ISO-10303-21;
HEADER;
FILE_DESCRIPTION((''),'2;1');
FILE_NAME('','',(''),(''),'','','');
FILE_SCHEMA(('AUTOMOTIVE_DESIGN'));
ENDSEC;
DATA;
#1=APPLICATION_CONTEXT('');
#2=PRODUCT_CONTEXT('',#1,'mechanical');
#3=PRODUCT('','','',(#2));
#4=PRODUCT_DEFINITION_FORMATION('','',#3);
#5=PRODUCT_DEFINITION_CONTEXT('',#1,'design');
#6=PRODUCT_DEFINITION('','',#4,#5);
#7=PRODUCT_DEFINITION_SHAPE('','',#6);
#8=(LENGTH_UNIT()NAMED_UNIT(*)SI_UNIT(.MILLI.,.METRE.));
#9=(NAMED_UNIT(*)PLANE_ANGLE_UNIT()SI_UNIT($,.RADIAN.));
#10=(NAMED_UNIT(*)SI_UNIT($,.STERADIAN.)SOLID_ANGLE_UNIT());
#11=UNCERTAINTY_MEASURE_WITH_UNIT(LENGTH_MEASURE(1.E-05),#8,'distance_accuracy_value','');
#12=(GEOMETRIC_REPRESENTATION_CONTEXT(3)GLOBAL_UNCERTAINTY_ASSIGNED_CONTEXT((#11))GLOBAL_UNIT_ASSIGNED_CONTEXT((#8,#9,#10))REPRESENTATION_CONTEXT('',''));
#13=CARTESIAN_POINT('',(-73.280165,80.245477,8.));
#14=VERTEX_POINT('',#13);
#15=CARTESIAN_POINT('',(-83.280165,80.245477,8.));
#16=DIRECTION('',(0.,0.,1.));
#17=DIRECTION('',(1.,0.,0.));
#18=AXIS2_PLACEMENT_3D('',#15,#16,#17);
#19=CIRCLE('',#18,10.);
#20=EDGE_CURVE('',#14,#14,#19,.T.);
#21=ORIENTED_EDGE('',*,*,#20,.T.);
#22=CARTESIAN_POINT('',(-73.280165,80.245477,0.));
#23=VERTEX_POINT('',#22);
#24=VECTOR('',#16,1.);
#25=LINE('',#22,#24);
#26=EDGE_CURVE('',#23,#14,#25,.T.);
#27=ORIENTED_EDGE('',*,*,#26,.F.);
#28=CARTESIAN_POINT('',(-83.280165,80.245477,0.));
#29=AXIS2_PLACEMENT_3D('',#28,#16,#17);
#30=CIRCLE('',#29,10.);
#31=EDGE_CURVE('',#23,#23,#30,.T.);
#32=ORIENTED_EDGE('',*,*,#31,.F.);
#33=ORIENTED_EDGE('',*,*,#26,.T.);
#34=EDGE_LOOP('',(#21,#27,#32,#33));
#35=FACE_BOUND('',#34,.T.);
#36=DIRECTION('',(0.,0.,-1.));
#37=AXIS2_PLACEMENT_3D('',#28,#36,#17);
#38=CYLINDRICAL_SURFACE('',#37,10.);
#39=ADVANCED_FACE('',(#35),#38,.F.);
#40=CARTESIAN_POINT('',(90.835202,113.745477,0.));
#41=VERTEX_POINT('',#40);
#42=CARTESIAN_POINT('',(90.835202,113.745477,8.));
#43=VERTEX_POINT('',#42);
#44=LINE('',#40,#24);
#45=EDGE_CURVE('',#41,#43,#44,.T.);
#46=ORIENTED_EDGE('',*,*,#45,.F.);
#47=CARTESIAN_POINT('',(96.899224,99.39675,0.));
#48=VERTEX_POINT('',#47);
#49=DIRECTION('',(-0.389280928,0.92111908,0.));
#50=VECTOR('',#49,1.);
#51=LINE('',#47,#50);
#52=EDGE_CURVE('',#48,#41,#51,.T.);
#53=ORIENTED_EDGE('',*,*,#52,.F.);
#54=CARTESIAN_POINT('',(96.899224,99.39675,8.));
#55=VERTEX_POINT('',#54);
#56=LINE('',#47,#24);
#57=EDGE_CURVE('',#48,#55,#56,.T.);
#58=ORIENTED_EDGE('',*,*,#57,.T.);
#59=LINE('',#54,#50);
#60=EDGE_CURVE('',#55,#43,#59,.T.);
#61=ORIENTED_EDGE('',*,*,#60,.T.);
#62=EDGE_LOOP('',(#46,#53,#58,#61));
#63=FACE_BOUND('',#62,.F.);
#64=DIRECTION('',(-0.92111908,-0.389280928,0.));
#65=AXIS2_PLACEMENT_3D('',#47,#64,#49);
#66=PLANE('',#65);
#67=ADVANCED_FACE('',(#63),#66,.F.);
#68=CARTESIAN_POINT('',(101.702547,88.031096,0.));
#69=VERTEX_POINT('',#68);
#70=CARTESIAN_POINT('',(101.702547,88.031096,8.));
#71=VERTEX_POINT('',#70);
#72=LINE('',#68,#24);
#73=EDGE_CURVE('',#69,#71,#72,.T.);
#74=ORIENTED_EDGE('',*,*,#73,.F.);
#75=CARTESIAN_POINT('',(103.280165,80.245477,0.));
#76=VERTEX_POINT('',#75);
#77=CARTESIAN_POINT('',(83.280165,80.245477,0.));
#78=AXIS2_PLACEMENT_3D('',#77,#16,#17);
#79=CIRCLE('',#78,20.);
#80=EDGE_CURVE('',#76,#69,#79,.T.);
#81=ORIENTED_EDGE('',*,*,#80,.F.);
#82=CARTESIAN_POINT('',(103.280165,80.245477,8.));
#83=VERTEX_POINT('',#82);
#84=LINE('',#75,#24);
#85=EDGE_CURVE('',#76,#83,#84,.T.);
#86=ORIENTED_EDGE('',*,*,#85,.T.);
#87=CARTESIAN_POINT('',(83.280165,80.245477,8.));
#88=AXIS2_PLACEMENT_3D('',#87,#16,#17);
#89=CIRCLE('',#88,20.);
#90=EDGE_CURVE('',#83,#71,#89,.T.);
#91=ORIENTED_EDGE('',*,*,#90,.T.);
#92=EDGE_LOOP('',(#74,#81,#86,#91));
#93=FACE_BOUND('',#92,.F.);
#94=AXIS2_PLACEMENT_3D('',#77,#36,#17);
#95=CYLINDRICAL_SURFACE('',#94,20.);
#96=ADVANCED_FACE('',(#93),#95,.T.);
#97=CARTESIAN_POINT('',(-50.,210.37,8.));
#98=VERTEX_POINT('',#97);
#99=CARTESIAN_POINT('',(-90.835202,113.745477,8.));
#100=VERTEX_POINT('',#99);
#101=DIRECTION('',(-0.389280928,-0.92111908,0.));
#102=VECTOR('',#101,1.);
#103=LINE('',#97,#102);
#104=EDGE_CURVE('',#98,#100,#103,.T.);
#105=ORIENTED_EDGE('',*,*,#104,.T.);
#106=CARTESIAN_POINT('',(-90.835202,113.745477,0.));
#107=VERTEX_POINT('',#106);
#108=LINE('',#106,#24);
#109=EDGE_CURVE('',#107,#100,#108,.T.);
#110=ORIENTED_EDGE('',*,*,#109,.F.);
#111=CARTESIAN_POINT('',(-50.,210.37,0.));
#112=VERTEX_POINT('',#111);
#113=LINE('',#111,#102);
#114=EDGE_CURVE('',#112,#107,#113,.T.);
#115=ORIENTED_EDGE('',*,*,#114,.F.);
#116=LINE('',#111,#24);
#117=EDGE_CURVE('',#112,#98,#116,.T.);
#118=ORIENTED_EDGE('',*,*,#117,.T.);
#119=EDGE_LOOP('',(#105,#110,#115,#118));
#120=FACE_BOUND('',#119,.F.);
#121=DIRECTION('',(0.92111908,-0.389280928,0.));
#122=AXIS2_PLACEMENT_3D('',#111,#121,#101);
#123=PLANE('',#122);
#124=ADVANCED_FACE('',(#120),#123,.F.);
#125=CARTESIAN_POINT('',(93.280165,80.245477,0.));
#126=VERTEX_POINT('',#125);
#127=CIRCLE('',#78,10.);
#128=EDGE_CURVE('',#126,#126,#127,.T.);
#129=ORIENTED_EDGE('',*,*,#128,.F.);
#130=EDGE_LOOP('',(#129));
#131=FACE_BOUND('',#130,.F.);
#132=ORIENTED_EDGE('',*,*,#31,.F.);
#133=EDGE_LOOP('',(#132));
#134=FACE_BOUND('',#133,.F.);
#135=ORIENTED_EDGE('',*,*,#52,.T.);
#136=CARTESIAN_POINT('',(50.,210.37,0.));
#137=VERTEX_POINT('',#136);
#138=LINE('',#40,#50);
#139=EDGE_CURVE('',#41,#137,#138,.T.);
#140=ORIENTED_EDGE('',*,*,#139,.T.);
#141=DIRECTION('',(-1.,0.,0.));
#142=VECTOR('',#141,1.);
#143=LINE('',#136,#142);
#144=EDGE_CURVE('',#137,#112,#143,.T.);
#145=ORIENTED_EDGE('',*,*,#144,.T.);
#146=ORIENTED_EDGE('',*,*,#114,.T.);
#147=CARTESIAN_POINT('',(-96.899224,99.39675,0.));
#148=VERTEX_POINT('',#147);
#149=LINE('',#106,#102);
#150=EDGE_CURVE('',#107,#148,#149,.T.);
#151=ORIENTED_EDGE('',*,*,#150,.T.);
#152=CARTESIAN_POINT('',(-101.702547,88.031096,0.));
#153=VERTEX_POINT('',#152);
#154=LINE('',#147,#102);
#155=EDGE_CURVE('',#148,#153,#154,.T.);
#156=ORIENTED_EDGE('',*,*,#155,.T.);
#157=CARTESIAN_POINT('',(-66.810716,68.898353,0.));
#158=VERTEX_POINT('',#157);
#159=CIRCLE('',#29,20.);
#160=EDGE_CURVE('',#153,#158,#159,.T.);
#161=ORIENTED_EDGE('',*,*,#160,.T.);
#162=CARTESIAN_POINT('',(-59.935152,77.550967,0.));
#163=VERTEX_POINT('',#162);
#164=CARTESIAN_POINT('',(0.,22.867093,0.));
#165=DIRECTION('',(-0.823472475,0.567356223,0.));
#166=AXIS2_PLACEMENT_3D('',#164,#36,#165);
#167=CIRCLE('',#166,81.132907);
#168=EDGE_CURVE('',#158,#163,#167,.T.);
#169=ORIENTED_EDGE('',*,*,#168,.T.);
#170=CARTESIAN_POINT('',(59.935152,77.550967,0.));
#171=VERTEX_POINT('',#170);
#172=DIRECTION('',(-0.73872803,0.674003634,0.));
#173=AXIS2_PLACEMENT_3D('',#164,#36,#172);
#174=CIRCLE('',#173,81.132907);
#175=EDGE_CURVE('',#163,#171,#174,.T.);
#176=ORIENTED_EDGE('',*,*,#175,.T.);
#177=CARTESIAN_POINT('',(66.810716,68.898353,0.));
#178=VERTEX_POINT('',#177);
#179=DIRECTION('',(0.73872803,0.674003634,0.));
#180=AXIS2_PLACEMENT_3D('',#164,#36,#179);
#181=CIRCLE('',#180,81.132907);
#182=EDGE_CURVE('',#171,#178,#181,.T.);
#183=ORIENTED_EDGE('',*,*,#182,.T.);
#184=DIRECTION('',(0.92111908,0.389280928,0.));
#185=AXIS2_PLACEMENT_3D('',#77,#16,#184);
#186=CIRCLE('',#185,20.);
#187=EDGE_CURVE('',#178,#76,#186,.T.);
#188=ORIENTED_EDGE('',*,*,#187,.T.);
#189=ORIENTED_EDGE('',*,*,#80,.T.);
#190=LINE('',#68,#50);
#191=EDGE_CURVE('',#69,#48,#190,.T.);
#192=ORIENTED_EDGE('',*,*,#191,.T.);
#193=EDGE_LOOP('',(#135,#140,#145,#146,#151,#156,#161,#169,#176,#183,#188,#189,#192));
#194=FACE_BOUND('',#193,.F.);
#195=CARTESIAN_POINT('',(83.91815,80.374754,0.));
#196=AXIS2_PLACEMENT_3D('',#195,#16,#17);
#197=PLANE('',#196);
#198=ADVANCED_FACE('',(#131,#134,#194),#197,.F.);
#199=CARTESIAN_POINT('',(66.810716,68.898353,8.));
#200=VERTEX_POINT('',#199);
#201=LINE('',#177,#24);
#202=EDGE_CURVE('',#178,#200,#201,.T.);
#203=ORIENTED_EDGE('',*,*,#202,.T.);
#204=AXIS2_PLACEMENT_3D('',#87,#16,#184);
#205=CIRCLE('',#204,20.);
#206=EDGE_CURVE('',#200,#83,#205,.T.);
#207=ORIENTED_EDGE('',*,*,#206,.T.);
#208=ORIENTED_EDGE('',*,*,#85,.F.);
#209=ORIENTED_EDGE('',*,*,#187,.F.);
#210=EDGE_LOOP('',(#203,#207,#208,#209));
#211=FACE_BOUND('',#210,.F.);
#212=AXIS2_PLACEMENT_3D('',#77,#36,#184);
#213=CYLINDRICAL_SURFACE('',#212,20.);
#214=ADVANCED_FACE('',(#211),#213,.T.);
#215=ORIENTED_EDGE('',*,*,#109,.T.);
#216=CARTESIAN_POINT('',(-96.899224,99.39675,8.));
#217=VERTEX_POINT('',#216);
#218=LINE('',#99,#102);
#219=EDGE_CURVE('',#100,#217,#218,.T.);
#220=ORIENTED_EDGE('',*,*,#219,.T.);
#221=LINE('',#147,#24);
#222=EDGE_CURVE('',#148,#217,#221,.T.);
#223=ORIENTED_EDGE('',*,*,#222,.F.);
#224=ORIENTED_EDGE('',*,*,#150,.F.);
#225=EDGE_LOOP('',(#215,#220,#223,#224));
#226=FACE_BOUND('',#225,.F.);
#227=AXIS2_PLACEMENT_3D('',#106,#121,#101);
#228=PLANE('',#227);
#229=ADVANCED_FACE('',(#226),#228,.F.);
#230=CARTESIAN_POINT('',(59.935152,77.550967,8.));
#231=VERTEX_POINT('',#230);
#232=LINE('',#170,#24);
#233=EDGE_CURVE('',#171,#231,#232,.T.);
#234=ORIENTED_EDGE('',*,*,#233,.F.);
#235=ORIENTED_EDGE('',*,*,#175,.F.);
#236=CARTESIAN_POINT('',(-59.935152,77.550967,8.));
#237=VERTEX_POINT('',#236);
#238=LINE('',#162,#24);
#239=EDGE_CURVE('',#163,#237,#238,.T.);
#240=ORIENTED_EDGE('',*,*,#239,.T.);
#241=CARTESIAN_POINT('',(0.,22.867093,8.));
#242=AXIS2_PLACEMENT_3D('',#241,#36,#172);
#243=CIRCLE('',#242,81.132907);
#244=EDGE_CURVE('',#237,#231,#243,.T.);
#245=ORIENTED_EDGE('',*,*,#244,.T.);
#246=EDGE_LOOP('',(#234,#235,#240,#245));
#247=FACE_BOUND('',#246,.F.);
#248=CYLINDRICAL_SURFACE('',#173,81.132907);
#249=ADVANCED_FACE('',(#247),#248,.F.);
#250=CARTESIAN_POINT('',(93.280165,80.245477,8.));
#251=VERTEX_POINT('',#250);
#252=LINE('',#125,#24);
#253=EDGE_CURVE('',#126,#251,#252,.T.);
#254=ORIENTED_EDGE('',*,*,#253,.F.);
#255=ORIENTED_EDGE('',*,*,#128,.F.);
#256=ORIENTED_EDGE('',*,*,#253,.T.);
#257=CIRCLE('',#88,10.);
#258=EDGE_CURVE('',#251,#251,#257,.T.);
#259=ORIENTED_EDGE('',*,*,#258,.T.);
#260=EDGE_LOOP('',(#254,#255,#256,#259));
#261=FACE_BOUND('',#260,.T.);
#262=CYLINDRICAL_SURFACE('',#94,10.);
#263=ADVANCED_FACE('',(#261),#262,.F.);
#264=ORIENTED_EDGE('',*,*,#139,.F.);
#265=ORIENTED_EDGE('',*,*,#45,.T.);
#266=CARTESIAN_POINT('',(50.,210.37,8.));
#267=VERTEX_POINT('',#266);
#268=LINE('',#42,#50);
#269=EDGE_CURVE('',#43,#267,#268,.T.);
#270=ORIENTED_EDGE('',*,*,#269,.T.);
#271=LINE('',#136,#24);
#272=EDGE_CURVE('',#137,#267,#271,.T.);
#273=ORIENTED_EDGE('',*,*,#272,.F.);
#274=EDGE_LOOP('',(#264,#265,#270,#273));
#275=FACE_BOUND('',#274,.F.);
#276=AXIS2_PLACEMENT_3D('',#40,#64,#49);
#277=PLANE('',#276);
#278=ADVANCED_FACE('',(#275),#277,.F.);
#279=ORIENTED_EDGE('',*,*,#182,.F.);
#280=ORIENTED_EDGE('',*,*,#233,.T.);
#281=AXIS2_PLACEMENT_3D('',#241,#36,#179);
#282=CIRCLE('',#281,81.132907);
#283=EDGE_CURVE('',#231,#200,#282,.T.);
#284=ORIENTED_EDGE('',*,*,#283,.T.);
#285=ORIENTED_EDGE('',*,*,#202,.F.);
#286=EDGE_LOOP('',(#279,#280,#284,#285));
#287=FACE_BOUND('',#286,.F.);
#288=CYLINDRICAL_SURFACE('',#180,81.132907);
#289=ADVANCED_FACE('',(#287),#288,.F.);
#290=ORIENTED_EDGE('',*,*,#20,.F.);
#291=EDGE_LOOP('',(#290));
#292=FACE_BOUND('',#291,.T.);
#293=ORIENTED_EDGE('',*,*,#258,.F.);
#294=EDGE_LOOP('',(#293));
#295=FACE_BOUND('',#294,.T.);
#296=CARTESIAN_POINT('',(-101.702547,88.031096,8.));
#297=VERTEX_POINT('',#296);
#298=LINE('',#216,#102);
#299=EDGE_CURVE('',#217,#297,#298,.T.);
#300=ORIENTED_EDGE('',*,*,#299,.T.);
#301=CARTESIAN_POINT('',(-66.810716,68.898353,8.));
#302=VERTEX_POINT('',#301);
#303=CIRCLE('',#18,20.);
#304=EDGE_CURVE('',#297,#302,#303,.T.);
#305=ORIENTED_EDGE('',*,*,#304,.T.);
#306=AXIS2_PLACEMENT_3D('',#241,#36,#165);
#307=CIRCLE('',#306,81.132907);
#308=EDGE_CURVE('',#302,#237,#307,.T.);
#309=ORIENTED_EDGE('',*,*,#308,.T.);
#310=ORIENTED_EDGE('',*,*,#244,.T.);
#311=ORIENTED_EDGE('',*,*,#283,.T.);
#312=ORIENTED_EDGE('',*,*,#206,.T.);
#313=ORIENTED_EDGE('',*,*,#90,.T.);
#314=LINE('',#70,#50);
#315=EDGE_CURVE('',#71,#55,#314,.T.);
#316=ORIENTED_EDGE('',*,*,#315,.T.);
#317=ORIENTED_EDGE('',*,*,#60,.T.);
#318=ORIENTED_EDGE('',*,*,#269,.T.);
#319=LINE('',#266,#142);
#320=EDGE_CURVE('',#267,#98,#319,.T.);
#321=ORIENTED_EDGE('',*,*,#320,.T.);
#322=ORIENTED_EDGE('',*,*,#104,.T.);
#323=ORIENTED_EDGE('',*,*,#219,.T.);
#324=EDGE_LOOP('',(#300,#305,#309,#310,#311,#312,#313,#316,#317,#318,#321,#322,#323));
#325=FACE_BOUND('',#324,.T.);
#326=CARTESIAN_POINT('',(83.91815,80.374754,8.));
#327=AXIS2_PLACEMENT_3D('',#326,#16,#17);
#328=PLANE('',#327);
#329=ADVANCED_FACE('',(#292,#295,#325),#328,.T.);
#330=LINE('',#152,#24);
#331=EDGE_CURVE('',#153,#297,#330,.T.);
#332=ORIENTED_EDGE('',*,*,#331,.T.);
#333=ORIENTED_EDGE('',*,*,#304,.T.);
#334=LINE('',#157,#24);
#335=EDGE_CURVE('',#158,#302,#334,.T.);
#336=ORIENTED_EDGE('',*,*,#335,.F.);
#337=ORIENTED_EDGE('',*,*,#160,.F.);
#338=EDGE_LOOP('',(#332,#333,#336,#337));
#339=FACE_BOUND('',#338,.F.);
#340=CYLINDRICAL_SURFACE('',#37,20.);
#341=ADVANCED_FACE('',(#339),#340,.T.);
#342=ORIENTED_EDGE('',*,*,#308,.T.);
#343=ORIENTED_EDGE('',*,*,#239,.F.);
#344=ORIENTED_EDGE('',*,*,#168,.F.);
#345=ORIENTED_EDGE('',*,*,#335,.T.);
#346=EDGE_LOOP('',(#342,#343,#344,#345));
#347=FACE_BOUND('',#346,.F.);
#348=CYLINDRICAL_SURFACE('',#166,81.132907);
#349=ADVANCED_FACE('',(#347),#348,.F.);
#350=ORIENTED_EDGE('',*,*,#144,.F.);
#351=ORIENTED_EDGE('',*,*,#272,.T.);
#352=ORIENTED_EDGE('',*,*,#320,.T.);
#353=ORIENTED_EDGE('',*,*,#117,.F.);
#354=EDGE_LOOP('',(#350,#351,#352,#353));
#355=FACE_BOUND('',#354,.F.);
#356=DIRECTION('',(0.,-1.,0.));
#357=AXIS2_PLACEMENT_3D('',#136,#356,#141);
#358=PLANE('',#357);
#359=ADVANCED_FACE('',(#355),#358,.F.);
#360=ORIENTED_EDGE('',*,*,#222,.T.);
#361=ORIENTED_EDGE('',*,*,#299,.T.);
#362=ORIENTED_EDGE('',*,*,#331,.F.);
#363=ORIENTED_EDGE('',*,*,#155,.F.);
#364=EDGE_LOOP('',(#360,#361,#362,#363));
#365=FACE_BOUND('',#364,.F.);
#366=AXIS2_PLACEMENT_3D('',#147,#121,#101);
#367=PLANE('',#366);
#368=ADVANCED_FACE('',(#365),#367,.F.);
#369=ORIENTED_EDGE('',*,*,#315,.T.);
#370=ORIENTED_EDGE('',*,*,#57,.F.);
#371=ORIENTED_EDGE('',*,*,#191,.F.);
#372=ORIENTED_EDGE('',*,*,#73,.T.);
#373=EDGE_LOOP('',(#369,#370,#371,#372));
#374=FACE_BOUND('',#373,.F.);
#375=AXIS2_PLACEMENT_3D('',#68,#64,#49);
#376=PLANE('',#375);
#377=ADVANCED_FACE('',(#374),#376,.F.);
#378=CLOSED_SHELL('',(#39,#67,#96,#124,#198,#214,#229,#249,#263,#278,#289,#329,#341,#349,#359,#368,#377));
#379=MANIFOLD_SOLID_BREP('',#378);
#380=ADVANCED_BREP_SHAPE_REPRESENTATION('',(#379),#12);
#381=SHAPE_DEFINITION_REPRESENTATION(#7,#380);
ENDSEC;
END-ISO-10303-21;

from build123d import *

# Parameters (mm, degrees)
F0_R     = 10
F1_DEPTH = 8


with BuildPart() as f1:
    # F0 (on Top) → F1 (new body)
    with BuildSketch(Plane.XY):
        with BuildLine():
            ThreePointArc((66.8107155763, 68.8983527146), (89.2220086446, 61.1485010982), (103.2801650714, 80.2454771665))
            ThreePointArc((103.2801650714, 80.2454771665), (102.8817929615, 84.2174016446), (101.7025466654, 88.0310957293))
            ThreePointArc((101.7025466654, 88.0310957293), (73.6640874011, 97.7820404055), (66.8107155763, 68.8983527146))
        make_face()
        with Locations((83.2801650714, 80.2454771665)):
            Circle(F0_R, mode=Mode.SUBTRACT)
        with BuildLine():
            ThreePointArc((66.8107155763, 68.8983527146), (73.6640874011, 97.7820404055), (101.7025466654, 88.0310957293))
            Line((101.7025466654, 88.0310957293), (96.8992238213, 99.3967496769))
            ThreePointArc((96.8992238213, 99.3967496769), (71.3236564608, 100.476441104), (59.9351524158, 77.550967172))
            ThreePointArc((59.9351524158, 77.550967172), (63.5204352748, 73.3418677958), (66.8107155763, 68.8983527146))
        make_face()
        with BuildLine():
            ThreePointArc((59.9351524158, 77.550967172), (71.3236564608, 100.476441104), (96.8992238213, 99.3967496769))
            Line((96.8992238213, 99.3967496769), (90.8352022654, 113.7454771665))
            Line((90.8352022654, 113.7454771665), (-90.8352022654, 113.7454771665))
            Line((-90.8352022654, 113.7454771665), (-96.8992238213, 99.3967496769))
            ThreePointArc((-96.8992238213, 99.3967496769), (-72.5051449003, 101.1296563534), (-59.7801650714, 80.2454771665))
            ThreePointArc((-59.7801650714, 80.2454771665), (-59.8189439032, 78.8959953041), (-59.9351524158, 77.550967172))
            ThreePointArc((-59.9351524158, 77.550967172), (0, 104), (59.9351524158, 77.550967172))
        make_face()
        with BuildLine():
            ThreePointArc((-66.8107155763, 68.8983527146), (-63.5204352748, 73.3418677958), (-59.9351524158, 77.550967172))
            ThreePointArc((-59.9351524158, 77.550967172), (-59.8189439032, 78.8959953041), (-59.7801650714, 80.2454771665))
            ThreePointArc((-59.7801650714, 80.2454771665), (-72.5051449003, 101.1296563534), (-96.8992238213, 99.3967496769))
            Line((-96.8992238213, 99.3967496769), (-101.7025466654, 88.0310957293))
            ThreePointArc((-101.7025466654, 88.0310957293), (-79.3082405933, 99.8471050565), (-63.2801650714, 80.2454771665))
            ThreePointArc((-63.2801650714, 80.2454771665), (-64.1831890032, 74.3036335933), (-66.8107155763, 68.8983527146))
        make_face()
        with BuildLine():
            ThreePointArc((-101.7025466654, 88.0310957293), (-92.8962427418, 62.7089139274), (-66.8107155763, 68.8983527146))
            ThreePointArc((-66.8107155763, 68.8983527146), (-64.1831890032, 74.3036335933), (-63.2801650714, 80.2454771665))
            ThreePointArc((-63.2801650714, 80.2454771665), (-79.3082405933, 99.8471050565), (-101.7025466654, 88.0310957293))
        make_face()
        with Locations((-83.2801650714, 80.2454771665)):
            Circle(F0_R, mode=Mode.SUBTRACT)
        Polygon((-90.8352022654, 113.7454771665), (90.8352022654, 113.7454771665), (50, 210.37), (0, 210.37), (-50, 210.37), align=None)
    extrude(amount=F1_DEPTH)


solid = f1.part
